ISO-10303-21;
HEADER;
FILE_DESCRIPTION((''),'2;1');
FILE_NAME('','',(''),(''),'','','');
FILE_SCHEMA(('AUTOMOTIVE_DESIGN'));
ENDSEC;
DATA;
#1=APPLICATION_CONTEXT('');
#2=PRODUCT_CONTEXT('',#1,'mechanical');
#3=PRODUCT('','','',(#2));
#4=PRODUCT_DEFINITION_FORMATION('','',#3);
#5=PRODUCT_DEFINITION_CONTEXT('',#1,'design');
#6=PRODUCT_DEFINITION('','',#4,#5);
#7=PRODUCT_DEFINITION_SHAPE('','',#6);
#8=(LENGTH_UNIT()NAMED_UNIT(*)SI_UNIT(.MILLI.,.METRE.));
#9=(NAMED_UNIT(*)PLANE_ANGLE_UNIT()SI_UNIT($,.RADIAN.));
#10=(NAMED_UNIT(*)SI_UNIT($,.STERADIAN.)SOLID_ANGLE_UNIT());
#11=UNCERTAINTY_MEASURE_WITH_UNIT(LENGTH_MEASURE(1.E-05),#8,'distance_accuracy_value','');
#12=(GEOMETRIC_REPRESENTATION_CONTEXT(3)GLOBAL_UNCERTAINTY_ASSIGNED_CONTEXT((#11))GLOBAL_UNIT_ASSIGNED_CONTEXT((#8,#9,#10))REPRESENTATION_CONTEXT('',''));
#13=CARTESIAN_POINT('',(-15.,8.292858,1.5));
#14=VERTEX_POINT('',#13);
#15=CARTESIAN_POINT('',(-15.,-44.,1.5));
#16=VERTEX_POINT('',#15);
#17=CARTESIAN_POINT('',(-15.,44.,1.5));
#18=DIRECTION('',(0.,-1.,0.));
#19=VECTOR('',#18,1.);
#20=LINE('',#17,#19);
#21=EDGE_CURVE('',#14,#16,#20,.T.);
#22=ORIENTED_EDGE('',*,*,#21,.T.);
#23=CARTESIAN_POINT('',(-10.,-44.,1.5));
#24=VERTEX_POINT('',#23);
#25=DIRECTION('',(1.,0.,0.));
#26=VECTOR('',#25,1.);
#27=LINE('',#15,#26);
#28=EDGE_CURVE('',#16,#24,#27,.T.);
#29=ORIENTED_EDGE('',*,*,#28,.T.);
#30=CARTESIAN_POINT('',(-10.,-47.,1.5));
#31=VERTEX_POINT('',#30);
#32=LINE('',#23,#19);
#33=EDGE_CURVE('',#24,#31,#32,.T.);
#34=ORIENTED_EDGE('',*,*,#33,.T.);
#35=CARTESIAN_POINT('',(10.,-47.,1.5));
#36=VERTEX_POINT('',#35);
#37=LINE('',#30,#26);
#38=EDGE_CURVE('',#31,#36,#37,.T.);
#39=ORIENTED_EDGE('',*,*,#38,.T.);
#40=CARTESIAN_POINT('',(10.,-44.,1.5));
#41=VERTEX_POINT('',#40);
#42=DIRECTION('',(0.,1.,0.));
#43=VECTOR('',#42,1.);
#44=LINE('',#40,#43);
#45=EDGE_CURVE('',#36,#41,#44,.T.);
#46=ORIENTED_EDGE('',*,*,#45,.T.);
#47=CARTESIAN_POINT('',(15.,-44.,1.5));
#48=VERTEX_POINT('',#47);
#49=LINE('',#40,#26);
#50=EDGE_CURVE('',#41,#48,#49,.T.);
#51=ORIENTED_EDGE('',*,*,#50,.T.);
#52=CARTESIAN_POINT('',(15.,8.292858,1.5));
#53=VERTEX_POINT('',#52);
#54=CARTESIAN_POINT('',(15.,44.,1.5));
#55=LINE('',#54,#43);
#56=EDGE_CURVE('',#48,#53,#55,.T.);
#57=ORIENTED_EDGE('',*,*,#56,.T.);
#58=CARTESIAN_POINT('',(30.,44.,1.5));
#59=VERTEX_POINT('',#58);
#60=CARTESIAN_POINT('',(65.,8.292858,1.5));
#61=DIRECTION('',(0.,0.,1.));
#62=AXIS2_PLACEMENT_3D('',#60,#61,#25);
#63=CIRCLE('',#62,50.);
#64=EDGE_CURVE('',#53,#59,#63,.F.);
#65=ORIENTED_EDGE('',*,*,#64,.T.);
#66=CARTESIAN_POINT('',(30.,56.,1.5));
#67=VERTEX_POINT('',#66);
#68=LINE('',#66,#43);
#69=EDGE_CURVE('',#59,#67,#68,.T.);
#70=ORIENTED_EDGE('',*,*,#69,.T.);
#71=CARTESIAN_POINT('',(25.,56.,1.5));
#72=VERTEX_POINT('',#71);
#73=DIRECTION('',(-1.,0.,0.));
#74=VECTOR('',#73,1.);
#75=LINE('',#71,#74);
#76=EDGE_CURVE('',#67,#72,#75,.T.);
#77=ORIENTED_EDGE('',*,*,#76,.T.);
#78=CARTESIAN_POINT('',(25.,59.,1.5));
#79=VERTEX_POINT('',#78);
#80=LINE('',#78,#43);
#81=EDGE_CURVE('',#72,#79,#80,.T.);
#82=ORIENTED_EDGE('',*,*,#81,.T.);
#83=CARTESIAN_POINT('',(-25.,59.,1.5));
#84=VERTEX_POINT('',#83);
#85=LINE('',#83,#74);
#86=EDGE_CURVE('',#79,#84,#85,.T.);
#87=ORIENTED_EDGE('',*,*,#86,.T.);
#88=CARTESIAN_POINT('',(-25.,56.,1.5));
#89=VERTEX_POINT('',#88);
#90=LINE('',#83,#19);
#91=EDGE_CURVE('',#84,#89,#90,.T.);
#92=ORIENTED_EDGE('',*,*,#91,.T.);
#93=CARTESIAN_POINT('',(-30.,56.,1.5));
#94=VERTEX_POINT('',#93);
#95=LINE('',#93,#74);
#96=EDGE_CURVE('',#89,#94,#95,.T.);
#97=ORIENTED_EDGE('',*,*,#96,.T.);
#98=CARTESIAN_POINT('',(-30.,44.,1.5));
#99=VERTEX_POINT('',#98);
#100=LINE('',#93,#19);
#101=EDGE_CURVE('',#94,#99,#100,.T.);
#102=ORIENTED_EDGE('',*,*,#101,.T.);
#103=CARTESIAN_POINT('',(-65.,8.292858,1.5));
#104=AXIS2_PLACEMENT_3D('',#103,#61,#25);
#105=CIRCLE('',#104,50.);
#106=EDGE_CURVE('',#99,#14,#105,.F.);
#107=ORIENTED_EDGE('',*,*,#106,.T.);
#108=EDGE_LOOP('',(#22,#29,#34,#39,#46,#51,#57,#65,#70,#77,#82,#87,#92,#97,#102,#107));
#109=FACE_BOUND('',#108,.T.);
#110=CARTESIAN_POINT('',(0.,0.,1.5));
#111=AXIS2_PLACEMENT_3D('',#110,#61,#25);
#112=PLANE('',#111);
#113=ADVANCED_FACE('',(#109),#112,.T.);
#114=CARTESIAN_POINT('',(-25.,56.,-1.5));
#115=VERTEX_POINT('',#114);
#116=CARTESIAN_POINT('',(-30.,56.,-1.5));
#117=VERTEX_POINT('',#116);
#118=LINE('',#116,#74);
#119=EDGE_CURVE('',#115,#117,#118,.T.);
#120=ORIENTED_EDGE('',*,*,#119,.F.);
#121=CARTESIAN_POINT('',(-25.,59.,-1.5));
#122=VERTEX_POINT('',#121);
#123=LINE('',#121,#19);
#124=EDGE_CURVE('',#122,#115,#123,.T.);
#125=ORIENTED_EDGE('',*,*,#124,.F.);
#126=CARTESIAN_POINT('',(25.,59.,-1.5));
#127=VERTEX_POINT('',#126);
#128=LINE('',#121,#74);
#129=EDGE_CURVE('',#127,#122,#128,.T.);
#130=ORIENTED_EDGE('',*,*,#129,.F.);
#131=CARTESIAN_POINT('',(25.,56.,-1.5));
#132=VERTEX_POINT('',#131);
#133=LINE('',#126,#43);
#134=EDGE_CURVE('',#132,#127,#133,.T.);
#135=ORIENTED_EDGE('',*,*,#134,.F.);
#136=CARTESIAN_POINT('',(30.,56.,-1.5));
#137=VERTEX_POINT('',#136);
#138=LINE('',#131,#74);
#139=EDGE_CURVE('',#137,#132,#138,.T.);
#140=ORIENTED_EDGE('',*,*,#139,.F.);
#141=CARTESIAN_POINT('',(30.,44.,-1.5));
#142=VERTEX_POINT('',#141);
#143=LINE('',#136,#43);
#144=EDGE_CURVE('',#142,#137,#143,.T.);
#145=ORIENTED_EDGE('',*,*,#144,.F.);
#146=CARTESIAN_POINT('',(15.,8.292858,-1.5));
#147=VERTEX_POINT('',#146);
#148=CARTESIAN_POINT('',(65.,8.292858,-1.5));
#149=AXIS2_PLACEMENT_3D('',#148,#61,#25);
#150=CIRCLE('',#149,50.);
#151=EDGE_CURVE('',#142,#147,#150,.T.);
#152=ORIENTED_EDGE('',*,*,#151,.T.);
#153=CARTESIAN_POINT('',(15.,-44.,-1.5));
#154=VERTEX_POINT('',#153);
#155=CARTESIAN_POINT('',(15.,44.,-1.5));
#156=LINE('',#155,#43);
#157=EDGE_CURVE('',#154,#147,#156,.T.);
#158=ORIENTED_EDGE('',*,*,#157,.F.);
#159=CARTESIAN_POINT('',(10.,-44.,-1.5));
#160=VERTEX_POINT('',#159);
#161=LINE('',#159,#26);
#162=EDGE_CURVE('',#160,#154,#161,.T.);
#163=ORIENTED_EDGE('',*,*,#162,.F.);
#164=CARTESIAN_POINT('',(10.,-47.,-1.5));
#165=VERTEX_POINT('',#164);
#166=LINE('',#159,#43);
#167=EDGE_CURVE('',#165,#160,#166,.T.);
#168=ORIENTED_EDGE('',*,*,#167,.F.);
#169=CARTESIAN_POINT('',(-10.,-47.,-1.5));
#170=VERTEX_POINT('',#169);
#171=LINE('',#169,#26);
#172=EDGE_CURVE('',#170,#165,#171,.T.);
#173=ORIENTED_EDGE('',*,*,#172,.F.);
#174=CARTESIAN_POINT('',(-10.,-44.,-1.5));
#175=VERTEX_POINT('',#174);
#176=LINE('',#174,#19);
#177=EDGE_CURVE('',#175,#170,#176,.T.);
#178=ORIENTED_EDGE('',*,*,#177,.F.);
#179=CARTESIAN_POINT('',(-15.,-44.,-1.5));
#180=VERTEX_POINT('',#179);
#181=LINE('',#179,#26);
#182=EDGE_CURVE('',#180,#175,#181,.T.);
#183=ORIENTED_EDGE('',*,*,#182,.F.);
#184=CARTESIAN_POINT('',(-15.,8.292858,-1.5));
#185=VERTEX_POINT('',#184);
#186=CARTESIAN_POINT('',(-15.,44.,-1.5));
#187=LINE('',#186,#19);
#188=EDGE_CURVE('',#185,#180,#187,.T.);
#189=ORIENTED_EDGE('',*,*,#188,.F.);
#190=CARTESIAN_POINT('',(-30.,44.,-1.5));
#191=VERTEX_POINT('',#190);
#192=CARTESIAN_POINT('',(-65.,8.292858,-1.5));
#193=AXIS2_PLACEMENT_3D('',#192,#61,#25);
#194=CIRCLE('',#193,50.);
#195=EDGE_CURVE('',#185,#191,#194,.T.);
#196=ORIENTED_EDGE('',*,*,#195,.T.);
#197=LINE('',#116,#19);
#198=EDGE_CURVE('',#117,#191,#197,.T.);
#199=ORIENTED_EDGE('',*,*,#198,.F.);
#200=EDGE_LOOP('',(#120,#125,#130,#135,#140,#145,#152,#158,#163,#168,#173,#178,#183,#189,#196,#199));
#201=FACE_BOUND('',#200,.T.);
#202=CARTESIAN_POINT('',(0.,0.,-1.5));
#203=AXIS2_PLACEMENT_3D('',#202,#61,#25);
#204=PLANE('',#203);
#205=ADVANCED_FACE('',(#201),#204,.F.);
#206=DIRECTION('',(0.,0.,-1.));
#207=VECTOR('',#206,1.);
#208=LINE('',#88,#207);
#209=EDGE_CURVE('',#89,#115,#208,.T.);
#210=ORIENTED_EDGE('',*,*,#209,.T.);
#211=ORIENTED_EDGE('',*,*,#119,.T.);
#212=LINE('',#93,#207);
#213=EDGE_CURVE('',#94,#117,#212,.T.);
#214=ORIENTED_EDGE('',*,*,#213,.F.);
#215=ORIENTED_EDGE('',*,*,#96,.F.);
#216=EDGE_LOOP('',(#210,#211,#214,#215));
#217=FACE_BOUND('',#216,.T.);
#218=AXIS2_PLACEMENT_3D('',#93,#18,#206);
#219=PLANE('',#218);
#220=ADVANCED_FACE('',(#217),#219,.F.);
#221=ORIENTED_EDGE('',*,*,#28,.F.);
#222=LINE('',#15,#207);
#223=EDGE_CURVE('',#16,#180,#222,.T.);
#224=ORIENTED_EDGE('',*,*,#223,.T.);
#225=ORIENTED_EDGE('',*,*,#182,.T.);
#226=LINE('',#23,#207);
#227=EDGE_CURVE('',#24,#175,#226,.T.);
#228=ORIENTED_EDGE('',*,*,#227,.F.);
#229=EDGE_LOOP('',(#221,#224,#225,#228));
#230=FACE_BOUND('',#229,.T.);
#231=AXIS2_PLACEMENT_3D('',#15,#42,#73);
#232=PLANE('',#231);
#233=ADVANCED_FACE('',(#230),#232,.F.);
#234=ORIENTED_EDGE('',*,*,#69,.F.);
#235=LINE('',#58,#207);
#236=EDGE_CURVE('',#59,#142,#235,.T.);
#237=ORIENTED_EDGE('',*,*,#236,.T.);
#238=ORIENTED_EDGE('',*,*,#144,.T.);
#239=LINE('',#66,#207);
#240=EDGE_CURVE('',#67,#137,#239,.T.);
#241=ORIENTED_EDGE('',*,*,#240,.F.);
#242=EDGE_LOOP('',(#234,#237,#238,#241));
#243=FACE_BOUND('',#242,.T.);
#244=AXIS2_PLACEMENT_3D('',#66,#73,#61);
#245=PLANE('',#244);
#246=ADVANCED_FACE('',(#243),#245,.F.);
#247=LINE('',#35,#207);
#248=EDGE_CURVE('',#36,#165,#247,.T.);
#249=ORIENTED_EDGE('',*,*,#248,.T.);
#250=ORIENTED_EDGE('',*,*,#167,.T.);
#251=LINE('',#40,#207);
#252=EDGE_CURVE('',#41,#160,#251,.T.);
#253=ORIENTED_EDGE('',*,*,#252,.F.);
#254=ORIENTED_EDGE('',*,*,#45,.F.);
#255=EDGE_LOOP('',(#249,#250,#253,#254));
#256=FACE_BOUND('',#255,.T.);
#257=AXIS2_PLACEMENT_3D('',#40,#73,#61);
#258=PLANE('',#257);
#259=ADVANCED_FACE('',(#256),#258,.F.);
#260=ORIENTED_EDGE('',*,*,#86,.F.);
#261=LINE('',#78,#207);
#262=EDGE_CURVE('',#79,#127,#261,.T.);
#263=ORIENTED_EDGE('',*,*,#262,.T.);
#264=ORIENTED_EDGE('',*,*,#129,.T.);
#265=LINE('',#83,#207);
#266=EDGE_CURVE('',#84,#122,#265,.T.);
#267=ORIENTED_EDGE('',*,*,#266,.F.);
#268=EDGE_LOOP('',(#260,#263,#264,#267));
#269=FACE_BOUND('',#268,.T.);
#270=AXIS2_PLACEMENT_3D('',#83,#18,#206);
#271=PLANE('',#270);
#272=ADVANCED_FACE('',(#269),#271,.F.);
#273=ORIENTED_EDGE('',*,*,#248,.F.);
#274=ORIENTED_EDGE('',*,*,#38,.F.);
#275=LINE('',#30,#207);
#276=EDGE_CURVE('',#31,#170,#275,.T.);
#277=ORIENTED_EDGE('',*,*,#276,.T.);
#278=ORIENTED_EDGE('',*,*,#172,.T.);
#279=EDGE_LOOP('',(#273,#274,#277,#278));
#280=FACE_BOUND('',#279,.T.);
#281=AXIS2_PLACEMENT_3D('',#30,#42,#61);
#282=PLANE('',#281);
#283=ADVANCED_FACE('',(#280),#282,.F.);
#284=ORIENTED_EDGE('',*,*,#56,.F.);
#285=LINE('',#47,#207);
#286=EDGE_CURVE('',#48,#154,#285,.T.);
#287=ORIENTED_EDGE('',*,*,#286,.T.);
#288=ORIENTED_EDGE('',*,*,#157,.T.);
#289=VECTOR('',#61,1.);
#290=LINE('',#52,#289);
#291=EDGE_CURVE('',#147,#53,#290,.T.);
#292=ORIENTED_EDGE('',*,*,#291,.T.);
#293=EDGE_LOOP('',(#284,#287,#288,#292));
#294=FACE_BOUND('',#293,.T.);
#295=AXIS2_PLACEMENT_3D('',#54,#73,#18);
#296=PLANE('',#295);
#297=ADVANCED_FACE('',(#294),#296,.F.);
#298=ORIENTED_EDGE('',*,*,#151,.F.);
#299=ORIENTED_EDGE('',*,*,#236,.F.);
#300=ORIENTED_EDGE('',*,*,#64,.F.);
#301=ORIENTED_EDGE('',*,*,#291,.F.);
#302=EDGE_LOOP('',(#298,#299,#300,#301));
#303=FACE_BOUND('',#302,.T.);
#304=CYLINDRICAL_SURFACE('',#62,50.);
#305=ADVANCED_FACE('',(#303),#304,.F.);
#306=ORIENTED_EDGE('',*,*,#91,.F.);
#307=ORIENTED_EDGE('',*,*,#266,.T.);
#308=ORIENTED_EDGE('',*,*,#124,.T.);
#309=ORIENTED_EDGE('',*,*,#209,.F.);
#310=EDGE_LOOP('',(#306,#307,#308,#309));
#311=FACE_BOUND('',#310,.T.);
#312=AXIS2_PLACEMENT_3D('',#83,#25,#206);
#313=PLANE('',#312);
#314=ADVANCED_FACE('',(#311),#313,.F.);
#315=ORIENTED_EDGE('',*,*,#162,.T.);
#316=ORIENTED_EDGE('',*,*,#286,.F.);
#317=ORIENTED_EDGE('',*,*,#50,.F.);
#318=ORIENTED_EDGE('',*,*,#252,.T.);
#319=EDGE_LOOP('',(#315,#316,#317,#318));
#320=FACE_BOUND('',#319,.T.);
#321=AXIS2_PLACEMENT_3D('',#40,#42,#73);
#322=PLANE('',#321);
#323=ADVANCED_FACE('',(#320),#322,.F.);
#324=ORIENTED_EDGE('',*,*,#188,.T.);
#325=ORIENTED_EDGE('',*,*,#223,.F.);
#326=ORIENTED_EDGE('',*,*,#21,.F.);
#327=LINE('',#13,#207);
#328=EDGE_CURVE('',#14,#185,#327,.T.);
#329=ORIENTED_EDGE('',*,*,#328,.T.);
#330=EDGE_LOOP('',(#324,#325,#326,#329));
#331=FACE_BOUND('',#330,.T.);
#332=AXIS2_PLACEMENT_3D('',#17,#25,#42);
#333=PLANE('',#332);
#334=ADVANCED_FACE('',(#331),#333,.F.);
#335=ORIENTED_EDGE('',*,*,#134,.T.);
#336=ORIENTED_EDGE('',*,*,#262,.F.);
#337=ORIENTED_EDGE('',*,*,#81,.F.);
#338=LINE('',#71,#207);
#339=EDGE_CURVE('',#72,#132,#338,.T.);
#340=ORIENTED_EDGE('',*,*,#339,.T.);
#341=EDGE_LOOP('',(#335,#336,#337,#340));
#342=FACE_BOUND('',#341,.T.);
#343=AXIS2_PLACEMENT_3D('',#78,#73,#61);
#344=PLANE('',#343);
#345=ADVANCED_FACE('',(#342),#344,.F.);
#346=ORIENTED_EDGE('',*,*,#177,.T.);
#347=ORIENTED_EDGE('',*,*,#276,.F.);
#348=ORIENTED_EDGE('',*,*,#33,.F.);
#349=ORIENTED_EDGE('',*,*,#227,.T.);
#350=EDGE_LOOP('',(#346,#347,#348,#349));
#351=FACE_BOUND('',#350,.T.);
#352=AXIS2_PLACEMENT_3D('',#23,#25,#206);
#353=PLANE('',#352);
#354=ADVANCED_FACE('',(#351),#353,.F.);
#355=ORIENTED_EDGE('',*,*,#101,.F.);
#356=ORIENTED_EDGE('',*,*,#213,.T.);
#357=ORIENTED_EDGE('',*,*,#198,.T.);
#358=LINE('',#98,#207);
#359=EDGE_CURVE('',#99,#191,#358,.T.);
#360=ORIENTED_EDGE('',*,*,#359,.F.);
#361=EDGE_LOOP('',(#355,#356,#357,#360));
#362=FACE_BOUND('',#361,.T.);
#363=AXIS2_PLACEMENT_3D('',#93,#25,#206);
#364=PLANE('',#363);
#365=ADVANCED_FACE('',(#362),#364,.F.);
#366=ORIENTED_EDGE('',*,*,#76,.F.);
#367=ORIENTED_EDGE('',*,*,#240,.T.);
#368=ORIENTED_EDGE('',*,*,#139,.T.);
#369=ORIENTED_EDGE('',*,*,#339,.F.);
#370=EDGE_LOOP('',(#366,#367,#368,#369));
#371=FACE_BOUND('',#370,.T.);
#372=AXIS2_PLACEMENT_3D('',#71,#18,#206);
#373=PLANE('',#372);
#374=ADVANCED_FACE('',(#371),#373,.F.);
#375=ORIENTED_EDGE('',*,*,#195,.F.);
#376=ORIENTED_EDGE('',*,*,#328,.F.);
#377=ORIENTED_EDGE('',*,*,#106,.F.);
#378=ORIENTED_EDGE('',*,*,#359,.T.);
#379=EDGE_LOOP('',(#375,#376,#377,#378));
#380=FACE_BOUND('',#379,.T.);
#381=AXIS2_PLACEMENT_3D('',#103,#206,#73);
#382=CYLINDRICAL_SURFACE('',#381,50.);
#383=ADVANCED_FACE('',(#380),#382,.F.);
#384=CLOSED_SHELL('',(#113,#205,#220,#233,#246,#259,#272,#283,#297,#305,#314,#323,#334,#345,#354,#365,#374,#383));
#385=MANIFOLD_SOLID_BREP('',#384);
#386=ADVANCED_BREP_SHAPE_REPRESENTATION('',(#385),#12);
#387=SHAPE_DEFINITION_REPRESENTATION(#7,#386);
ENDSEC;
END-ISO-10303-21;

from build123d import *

# Parameters (mm, degrees)
BOSS_EXTRUDE1_DEPTH = 1.5
FILLET1_R           = 50


with BuildPart() as part:
    # Sketch2 → Boss-Extrude1 (new, symmetric)
    with BuildSketch(Plane.XY):
        Polygon((15, 44), (30, 44), (30, 56), (25, 56), (25, 59), (-25, 59), (-25, 56), (-30, 56), (-30, 44), (-15, 44), (-15, -44), (-10, -44), (-10, -47), (10, -47), (10, -44), (15, -44), align=None)
    extrude(amount=BOSS_EXTRUDE1_DEPTH, both=True)

    # Fillet1
    # the kernel refuses this fillet: 50 mm, written as the material it adds along each edge
    with BuildSketch(Plane(origin=(-15, 44, -1.5), x_dir=(0, -1, 0), z_dir=(0, 0, 1))) as fillet1_piece_1:
        with BuildLine():
            CenterArc((35.707142143, -50), FILLET1_R, 90, 45.572995999)
            Line((0, -15), (-0.714142843, -14.3))
            ThreePointArc((-0.714142843, -14.3), (-1, -7.5), (-1, 0))
            Line((-1, 0), (0, 1))
            Line((0, 1), (35.707142143, 1))
            Line((35.707142143, 1), (35.707142143, 0))
        make_face()
    extrude(amount=3)
    with BuildSketch(Plane(origin=(15, 44, 1.5), x_dir=(1, 0, 0), z_dir=(0, 0, -1))) as fillet1_piece_2:
        with BuildLine():
            CenterArc((50, 35.707142143), FILLET1_R, 180, 45.572995999)
            Line((0, 35.707142143), (-1, 35.707142143))
            Line((-1, 35.707142143), (-1, 0))
            Line((-1, 0), (0, -1))
            ThreePointArc((0, -1), (7.5, -1), (14.3, -0.714142843))
            Line((14.3, -0.714142843), (15, 0))
        make_face()
    extrude(amount=3)


solid = part.part
